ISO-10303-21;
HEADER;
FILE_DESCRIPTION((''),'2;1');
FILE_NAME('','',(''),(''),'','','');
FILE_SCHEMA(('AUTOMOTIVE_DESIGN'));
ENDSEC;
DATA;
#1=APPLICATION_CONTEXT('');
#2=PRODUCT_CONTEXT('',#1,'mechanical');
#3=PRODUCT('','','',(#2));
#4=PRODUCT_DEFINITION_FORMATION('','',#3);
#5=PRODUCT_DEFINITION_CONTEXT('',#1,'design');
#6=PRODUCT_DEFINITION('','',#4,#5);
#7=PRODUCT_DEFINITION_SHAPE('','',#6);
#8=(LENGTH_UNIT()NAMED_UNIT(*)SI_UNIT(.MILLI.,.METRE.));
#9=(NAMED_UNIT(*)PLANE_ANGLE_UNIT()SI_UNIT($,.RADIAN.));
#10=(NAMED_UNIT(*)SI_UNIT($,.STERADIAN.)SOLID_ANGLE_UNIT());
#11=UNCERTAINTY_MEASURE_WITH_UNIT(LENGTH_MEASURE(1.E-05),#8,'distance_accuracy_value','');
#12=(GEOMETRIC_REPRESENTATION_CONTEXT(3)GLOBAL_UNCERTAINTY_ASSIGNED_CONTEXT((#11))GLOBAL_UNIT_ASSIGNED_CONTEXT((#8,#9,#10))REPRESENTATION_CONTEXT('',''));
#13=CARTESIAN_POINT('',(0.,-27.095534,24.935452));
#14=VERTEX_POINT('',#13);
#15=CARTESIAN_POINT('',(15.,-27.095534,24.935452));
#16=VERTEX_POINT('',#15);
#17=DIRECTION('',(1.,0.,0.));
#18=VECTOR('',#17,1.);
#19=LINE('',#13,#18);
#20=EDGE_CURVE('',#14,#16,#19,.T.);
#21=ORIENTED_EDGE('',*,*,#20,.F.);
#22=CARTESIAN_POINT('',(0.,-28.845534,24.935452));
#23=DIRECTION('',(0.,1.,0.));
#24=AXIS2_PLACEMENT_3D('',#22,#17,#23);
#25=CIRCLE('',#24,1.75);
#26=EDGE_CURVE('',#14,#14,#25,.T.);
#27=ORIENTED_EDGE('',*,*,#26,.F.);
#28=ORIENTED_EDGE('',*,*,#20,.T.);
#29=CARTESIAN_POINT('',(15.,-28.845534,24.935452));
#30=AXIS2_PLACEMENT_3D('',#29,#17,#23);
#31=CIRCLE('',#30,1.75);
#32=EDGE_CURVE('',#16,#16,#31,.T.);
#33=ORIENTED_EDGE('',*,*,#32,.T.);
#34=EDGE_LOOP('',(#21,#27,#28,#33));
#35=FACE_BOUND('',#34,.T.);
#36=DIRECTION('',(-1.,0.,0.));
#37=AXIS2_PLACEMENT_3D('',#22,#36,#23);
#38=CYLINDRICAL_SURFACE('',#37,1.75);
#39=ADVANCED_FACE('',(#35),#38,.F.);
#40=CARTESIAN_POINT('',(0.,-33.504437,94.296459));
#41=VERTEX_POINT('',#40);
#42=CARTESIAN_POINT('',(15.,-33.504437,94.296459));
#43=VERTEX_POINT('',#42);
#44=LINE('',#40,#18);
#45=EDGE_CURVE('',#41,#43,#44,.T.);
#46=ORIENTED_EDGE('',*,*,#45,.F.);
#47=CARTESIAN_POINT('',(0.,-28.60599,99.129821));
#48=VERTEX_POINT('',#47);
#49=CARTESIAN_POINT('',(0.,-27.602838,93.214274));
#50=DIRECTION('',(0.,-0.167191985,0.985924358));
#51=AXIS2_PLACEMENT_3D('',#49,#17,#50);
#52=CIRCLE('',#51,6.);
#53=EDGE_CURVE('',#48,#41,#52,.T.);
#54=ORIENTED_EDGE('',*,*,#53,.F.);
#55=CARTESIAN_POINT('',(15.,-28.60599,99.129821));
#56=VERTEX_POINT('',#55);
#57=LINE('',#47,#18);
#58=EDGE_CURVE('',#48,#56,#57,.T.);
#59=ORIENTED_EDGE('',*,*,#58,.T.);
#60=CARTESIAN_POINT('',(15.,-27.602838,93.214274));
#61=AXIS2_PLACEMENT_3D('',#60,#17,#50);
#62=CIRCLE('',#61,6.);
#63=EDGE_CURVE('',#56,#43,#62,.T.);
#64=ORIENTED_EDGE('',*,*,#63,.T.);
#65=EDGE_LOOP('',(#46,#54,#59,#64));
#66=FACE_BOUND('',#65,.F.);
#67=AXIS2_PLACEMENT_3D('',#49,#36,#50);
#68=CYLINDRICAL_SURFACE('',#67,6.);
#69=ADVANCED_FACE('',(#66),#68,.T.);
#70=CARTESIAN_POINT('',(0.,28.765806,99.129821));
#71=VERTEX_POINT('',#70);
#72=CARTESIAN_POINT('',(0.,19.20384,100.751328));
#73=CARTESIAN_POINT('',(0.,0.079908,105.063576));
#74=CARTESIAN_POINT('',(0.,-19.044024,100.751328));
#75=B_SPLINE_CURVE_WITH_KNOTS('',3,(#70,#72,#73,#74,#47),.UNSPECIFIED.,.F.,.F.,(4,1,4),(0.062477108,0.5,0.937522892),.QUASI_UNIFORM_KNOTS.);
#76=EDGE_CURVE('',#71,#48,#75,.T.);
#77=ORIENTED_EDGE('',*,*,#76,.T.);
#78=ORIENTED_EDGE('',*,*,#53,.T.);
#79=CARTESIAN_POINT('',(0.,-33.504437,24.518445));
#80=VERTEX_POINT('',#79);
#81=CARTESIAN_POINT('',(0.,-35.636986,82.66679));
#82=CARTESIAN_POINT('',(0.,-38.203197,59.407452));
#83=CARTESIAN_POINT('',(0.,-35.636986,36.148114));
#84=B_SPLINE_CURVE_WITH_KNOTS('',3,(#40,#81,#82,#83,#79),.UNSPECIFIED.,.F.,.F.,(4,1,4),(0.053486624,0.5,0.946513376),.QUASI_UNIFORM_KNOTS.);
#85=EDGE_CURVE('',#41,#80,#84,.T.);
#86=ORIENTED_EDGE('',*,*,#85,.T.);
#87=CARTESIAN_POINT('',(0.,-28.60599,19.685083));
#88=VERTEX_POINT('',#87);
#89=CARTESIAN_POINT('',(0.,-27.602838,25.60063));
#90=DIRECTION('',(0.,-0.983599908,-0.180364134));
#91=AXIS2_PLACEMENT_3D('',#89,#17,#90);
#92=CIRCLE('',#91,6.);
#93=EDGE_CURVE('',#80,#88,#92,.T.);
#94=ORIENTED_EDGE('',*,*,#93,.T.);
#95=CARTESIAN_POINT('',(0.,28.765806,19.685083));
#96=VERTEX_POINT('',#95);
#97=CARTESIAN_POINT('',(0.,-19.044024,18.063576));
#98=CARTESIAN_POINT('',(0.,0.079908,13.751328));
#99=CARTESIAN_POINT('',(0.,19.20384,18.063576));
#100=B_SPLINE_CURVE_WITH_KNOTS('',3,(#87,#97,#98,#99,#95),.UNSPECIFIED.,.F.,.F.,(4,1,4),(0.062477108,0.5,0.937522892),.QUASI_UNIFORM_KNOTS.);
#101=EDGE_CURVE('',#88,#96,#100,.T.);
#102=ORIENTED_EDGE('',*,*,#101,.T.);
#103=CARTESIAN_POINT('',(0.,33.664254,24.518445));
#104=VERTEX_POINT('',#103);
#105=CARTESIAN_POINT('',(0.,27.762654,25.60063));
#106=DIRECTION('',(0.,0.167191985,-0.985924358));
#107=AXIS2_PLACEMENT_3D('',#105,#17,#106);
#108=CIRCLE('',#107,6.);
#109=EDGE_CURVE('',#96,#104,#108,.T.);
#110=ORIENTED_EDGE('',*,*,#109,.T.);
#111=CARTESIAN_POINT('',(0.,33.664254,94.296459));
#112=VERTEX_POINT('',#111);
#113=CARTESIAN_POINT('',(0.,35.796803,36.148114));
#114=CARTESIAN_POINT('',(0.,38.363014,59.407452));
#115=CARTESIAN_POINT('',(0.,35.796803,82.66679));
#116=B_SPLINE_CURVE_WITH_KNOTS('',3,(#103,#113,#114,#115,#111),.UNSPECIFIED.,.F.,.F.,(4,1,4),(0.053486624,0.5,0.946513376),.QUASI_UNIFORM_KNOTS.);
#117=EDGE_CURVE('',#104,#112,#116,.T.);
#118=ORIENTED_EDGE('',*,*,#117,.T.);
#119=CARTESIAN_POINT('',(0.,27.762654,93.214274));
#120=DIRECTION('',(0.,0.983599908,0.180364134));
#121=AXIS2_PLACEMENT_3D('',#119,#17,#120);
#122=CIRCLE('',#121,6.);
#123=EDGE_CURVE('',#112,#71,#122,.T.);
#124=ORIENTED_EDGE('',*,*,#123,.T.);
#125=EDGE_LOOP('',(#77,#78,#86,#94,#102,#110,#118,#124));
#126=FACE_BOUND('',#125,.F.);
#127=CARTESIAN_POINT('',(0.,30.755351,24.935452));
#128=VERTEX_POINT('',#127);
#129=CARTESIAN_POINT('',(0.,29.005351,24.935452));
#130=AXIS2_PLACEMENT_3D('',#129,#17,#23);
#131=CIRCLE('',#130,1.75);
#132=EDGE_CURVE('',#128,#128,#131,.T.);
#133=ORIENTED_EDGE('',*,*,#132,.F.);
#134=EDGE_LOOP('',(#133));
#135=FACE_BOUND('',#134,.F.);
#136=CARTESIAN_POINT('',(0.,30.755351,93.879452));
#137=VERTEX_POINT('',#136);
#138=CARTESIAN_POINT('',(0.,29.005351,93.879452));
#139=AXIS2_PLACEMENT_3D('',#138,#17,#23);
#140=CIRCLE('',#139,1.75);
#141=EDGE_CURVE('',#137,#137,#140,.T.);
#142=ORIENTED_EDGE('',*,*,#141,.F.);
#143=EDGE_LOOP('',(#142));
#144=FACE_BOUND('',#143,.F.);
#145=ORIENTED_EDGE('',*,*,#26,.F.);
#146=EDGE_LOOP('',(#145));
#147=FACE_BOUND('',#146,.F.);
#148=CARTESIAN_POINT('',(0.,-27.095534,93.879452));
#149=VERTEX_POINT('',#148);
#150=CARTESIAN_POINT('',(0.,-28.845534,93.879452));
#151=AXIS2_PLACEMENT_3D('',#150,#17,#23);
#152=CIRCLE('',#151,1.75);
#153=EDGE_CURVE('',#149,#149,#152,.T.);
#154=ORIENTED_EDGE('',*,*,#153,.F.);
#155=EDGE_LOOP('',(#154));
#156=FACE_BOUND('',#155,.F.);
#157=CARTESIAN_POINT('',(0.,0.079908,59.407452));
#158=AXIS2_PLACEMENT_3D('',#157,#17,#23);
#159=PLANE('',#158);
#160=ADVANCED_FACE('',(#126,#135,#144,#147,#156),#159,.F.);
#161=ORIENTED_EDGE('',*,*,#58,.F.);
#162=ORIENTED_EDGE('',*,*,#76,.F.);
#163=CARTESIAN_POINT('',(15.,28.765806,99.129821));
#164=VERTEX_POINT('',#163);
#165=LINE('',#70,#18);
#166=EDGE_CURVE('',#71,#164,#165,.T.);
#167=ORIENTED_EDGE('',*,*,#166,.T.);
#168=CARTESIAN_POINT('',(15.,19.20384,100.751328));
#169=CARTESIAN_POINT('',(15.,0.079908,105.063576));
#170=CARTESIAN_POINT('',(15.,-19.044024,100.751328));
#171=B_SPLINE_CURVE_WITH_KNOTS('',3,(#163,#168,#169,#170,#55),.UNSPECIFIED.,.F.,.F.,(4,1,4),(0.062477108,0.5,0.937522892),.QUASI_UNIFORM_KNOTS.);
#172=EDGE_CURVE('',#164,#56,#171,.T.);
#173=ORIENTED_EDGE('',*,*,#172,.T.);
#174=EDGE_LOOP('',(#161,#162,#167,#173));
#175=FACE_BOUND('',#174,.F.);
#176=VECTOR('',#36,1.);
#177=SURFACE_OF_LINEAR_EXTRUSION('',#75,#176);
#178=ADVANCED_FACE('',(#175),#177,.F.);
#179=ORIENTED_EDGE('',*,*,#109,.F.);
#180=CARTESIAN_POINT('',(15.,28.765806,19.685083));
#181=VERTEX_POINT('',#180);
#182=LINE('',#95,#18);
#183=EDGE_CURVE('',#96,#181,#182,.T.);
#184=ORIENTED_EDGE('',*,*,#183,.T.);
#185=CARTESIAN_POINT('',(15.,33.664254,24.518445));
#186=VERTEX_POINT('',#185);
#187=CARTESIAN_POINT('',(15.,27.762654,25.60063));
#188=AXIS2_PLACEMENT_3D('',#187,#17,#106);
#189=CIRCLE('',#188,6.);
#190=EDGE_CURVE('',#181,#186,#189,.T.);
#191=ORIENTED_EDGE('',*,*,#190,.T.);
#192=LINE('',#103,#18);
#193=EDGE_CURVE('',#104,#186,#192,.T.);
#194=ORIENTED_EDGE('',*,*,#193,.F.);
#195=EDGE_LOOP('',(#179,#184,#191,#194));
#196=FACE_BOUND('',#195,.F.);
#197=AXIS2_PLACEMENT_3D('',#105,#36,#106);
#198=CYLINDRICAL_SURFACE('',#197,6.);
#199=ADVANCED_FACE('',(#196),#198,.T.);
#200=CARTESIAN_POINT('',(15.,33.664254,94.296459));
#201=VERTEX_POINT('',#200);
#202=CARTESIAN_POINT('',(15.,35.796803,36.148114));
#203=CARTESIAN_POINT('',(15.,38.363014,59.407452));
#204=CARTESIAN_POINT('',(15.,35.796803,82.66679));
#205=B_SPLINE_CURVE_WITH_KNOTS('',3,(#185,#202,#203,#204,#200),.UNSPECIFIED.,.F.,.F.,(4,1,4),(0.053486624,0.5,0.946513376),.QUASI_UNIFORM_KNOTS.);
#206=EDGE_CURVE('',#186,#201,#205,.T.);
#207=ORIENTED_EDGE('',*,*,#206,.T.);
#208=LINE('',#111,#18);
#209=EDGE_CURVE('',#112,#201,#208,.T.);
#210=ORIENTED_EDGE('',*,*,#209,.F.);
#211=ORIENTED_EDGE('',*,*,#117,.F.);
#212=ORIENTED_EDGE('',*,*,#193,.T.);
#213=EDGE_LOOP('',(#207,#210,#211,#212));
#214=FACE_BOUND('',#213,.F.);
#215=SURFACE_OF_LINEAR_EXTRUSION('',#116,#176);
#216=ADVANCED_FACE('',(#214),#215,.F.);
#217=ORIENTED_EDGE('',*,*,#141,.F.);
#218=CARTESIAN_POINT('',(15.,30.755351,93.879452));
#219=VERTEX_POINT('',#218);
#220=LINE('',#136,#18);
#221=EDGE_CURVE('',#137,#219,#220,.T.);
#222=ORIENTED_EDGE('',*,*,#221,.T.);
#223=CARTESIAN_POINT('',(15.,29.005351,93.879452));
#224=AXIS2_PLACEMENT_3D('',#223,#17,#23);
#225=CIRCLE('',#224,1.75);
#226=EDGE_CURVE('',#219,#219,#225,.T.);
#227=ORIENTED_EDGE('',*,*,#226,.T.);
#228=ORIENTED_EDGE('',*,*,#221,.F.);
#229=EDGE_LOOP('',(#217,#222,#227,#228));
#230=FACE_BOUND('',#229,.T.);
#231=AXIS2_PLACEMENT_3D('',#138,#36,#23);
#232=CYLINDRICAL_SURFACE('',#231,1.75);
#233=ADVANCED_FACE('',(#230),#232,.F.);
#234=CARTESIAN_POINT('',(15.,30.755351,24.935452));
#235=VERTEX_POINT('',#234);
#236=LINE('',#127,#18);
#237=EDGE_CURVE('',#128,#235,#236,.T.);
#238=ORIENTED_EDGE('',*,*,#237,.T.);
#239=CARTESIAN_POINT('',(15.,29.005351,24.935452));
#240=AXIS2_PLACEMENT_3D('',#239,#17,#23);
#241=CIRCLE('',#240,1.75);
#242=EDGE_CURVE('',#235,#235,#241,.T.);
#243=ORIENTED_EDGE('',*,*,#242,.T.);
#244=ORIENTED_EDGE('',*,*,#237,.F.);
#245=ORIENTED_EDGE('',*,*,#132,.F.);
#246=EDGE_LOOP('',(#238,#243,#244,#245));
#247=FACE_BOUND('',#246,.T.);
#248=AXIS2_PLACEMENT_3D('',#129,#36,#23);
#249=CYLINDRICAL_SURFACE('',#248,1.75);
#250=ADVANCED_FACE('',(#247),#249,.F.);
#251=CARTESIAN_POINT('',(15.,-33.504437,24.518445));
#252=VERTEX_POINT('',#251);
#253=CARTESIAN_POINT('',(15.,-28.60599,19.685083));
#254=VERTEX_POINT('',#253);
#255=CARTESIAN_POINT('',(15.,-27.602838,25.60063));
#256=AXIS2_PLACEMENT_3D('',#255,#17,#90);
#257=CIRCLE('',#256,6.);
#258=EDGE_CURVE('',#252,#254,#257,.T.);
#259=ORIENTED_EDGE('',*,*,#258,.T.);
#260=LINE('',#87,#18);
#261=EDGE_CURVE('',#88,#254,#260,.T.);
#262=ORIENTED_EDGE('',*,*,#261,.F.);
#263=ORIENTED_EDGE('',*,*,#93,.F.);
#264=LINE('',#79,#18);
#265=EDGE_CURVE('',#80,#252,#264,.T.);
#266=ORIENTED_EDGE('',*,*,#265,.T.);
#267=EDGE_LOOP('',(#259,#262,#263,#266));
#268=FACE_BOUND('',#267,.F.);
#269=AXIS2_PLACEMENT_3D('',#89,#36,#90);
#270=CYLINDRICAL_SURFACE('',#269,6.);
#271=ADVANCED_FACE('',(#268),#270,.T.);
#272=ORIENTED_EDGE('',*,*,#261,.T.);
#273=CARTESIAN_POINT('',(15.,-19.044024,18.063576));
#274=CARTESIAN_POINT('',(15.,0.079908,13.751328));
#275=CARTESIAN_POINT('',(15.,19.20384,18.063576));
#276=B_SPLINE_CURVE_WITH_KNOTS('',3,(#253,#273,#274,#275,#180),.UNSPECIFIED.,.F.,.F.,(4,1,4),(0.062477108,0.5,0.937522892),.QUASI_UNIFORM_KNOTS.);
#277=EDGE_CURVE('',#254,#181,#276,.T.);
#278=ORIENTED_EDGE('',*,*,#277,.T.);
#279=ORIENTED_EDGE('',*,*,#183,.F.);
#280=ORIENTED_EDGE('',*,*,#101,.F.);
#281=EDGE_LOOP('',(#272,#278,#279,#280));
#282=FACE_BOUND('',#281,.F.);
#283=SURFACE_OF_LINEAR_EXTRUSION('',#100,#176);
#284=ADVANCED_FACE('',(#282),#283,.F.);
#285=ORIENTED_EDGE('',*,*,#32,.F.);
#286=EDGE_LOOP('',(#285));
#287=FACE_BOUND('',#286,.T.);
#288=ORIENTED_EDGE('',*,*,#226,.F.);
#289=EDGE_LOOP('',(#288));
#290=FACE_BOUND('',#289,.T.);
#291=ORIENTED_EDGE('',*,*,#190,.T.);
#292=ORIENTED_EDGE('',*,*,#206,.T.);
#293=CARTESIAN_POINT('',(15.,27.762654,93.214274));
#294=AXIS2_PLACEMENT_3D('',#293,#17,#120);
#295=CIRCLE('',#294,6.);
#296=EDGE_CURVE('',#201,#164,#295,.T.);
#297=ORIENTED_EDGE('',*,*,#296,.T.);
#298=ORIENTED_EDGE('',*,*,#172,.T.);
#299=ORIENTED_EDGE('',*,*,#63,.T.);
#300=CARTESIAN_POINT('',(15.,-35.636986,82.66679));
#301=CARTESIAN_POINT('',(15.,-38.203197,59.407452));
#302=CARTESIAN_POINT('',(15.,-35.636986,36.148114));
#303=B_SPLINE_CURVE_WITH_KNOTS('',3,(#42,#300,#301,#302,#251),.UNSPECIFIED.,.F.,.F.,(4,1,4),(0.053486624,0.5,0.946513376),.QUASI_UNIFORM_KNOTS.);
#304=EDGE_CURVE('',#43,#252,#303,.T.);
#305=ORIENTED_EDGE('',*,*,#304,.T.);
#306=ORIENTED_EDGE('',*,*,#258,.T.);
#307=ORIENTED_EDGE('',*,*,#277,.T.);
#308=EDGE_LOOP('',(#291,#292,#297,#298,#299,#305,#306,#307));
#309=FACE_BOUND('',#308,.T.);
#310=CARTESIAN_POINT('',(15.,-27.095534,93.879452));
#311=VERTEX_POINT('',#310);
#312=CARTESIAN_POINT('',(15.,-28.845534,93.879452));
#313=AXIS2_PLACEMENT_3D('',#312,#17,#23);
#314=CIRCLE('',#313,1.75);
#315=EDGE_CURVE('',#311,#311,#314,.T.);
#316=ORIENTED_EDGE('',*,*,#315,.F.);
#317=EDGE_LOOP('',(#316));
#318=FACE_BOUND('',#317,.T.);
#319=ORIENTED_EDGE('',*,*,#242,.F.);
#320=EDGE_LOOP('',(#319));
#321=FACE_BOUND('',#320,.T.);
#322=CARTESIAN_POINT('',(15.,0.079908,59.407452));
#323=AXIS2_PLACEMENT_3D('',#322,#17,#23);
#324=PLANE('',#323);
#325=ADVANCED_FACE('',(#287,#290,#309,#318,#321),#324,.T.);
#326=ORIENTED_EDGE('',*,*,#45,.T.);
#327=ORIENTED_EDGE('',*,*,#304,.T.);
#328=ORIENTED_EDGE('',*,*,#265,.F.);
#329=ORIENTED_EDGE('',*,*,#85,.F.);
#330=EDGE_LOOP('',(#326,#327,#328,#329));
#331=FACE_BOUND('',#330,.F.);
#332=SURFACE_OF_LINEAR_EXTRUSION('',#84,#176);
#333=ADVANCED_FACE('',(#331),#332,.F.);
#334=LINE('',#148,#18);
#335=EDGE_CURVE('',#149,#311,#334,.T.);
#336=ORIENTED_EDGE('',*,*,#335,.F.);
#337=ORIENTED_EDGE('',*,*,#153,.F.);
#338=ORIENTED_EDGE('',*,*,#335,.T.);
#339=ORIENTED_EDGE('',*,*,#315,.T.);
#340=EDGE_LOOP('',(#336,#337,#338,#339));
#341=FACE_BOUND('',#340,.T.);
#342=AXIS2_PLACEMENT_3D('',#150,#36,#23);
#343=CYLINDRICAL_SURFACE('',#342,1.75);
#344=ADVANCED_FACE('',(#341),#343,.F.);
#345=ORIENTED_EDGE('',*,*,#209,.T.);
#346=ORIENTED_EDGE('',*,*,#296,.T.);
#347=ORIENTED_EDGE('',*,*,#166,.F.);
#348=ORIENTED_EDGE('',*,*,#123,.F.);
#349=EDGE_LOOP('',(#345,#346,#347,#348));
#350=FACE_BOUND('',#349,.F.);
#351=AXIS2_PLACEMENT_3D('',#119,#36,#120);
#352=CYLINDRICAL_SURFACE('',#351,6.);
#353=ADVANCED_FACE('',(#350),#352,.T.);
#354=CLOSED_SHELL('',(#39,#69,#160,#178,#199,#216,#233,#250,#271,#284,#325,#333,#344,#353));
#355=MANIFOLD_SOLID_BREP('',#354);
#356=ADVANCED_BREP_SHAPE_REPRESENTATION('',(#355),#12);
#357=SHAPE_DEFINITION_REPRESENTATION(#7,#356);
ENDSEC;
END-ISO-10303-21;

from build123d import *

# Parameters (mm, degrees)
F0_R     = 3
F0_R_2   = 1.75
F1_DEPTH = 15


with BuildPart() as f1:
    # F0 (on Right) → F1 (new body)
    with BuildSketch(Plane.YZ):
        with BuildLine():
            ThreePointArc((33.6642538877, 94.2964592226), (31.9768261624, 97.4851943073), (28.7658063512, 99.1298205687))
            add(Edge.make_bspline(
                [(28.7658063512, 99.1298205687), (19.203840359, 100.7513284104), (0.0799083746, 105.0635755317), (-19.0440236097, 100.7513284104), (-28.6059896019, 99.1298205687)],
                knots=[0.0624771081, 0.0624771081, 0.0624771081, 0.0624771081, 0.5, 0.9375228919, 0.9375228919, 0.9375228919, 0.9375228919], degree=3))
            ThreePointArc((-28.6059896019, 99.1298205687), (-31.8170094131, 97.4851943073), (-33.5044371384, 94.2964592226))
            add(Edge.make_bspline(
                [(-33.5044371384, 94.2964592226), (-35.6369863321, 82.6667901388), (-38.2031969186, 59.4074519711), (-35.6369863321, 36.1481138033), (-33.5044371384, 24.5184447195)],
                knots=[0.0534866237, 0.0534866237, 0.0534866237, 0.0534866237, 0.5, 0.9465133763, 0.9465133763, 0.9465133763, 0.9465133763], degree=3))
            ThreePointArc((-33.5044371384, 24.5184447195), (-31.8170094131, 21.3297096348), (-28.6059896019, 19.6850833734))
            add(Edge.make_bspline(
                [(-28.6059896019, 19.6850833734), (-19.0440236097, 18.0635755317), (0.0799083746, 13.7513284104), (19.203840359, 18.0635755317), (28.7658063512, 19.6850833734)],
                knots=[0.0624771081, 0.0624771081, 0.0624771081, 0.0624771081, 0.5, 0.9375228919, 0.9375228919, 0.9375228919, 0.9375228919], degree=3))
            ThreePointArc((28.7658063512, 19.6850833734), (31.9768261624, 21.3297096348), (33.6642538877, 24.5184447195))
            add(Edge.make_bspline(
                [(33.6642538877, 24.5184447195), (35.7968030814, 36.1481138033), (38.3630136679, 59.4074519711), (35.7968030814, 82.6667901388), (33.6642538877, 94.2964592226)],
                knots=[0.0534866237, 0.0534866237, 0.0534866237, 0.0534866237, 0.5, 0.9465133763, 0.9465133763, 0.9465133763, 0.9465133763], degree=3))
        make_face()
        with Locations((-28.8455340613, 24.9354520307)):
            Circle(F0_R, mode=Mode.SUBTRACT)
        with Locations((29.0053508105, 24.9354520307)):
            Circle(F0_R, mode=Mode.SUBTRACT)
        with Locations((-28.8455340613, 93.8794519114)):
            Circle(F0_R, mode=Mode.SUBTRACT)
        with Locations((29.0053508105, 93.8794519114)):
            Circle(F0_R, mode=Mode.SUBTRACT)
        with Locations((29.0053508105, 93.8794519114)):
            Circle(F0_R)
        with Locations((29.0053508105, 93.8794519114)):
            Circle(F0_R_2, mode=Mode.SUBTRACT)
        with Locations((-28.8455340613, 93.8794519114)):
            Circle(F0_R)
        with Locations((-28.8455340613, 93.8794519114)):
            Circle(F0_R_2, mode=Mode.SUBTRACT)
        with Locations((-28.8455340613, 24.9354520307)):
            Circle(F0_R)
        with Locations((-28.8455340613, 24.9354520307)):
            Circle(F0_R_2, mode=Mode.SUBTRACT)
        with Locations((29.0053508105, 24.9354520307)):
            Circle(F0_R)
        with Locations((29.0053508105, 24.9354520307)):
            Circle(F0_R_2, mode=Mode.SUBTRACT)
    extrude(amount=F1_DEPTH)


solid = f1.part
